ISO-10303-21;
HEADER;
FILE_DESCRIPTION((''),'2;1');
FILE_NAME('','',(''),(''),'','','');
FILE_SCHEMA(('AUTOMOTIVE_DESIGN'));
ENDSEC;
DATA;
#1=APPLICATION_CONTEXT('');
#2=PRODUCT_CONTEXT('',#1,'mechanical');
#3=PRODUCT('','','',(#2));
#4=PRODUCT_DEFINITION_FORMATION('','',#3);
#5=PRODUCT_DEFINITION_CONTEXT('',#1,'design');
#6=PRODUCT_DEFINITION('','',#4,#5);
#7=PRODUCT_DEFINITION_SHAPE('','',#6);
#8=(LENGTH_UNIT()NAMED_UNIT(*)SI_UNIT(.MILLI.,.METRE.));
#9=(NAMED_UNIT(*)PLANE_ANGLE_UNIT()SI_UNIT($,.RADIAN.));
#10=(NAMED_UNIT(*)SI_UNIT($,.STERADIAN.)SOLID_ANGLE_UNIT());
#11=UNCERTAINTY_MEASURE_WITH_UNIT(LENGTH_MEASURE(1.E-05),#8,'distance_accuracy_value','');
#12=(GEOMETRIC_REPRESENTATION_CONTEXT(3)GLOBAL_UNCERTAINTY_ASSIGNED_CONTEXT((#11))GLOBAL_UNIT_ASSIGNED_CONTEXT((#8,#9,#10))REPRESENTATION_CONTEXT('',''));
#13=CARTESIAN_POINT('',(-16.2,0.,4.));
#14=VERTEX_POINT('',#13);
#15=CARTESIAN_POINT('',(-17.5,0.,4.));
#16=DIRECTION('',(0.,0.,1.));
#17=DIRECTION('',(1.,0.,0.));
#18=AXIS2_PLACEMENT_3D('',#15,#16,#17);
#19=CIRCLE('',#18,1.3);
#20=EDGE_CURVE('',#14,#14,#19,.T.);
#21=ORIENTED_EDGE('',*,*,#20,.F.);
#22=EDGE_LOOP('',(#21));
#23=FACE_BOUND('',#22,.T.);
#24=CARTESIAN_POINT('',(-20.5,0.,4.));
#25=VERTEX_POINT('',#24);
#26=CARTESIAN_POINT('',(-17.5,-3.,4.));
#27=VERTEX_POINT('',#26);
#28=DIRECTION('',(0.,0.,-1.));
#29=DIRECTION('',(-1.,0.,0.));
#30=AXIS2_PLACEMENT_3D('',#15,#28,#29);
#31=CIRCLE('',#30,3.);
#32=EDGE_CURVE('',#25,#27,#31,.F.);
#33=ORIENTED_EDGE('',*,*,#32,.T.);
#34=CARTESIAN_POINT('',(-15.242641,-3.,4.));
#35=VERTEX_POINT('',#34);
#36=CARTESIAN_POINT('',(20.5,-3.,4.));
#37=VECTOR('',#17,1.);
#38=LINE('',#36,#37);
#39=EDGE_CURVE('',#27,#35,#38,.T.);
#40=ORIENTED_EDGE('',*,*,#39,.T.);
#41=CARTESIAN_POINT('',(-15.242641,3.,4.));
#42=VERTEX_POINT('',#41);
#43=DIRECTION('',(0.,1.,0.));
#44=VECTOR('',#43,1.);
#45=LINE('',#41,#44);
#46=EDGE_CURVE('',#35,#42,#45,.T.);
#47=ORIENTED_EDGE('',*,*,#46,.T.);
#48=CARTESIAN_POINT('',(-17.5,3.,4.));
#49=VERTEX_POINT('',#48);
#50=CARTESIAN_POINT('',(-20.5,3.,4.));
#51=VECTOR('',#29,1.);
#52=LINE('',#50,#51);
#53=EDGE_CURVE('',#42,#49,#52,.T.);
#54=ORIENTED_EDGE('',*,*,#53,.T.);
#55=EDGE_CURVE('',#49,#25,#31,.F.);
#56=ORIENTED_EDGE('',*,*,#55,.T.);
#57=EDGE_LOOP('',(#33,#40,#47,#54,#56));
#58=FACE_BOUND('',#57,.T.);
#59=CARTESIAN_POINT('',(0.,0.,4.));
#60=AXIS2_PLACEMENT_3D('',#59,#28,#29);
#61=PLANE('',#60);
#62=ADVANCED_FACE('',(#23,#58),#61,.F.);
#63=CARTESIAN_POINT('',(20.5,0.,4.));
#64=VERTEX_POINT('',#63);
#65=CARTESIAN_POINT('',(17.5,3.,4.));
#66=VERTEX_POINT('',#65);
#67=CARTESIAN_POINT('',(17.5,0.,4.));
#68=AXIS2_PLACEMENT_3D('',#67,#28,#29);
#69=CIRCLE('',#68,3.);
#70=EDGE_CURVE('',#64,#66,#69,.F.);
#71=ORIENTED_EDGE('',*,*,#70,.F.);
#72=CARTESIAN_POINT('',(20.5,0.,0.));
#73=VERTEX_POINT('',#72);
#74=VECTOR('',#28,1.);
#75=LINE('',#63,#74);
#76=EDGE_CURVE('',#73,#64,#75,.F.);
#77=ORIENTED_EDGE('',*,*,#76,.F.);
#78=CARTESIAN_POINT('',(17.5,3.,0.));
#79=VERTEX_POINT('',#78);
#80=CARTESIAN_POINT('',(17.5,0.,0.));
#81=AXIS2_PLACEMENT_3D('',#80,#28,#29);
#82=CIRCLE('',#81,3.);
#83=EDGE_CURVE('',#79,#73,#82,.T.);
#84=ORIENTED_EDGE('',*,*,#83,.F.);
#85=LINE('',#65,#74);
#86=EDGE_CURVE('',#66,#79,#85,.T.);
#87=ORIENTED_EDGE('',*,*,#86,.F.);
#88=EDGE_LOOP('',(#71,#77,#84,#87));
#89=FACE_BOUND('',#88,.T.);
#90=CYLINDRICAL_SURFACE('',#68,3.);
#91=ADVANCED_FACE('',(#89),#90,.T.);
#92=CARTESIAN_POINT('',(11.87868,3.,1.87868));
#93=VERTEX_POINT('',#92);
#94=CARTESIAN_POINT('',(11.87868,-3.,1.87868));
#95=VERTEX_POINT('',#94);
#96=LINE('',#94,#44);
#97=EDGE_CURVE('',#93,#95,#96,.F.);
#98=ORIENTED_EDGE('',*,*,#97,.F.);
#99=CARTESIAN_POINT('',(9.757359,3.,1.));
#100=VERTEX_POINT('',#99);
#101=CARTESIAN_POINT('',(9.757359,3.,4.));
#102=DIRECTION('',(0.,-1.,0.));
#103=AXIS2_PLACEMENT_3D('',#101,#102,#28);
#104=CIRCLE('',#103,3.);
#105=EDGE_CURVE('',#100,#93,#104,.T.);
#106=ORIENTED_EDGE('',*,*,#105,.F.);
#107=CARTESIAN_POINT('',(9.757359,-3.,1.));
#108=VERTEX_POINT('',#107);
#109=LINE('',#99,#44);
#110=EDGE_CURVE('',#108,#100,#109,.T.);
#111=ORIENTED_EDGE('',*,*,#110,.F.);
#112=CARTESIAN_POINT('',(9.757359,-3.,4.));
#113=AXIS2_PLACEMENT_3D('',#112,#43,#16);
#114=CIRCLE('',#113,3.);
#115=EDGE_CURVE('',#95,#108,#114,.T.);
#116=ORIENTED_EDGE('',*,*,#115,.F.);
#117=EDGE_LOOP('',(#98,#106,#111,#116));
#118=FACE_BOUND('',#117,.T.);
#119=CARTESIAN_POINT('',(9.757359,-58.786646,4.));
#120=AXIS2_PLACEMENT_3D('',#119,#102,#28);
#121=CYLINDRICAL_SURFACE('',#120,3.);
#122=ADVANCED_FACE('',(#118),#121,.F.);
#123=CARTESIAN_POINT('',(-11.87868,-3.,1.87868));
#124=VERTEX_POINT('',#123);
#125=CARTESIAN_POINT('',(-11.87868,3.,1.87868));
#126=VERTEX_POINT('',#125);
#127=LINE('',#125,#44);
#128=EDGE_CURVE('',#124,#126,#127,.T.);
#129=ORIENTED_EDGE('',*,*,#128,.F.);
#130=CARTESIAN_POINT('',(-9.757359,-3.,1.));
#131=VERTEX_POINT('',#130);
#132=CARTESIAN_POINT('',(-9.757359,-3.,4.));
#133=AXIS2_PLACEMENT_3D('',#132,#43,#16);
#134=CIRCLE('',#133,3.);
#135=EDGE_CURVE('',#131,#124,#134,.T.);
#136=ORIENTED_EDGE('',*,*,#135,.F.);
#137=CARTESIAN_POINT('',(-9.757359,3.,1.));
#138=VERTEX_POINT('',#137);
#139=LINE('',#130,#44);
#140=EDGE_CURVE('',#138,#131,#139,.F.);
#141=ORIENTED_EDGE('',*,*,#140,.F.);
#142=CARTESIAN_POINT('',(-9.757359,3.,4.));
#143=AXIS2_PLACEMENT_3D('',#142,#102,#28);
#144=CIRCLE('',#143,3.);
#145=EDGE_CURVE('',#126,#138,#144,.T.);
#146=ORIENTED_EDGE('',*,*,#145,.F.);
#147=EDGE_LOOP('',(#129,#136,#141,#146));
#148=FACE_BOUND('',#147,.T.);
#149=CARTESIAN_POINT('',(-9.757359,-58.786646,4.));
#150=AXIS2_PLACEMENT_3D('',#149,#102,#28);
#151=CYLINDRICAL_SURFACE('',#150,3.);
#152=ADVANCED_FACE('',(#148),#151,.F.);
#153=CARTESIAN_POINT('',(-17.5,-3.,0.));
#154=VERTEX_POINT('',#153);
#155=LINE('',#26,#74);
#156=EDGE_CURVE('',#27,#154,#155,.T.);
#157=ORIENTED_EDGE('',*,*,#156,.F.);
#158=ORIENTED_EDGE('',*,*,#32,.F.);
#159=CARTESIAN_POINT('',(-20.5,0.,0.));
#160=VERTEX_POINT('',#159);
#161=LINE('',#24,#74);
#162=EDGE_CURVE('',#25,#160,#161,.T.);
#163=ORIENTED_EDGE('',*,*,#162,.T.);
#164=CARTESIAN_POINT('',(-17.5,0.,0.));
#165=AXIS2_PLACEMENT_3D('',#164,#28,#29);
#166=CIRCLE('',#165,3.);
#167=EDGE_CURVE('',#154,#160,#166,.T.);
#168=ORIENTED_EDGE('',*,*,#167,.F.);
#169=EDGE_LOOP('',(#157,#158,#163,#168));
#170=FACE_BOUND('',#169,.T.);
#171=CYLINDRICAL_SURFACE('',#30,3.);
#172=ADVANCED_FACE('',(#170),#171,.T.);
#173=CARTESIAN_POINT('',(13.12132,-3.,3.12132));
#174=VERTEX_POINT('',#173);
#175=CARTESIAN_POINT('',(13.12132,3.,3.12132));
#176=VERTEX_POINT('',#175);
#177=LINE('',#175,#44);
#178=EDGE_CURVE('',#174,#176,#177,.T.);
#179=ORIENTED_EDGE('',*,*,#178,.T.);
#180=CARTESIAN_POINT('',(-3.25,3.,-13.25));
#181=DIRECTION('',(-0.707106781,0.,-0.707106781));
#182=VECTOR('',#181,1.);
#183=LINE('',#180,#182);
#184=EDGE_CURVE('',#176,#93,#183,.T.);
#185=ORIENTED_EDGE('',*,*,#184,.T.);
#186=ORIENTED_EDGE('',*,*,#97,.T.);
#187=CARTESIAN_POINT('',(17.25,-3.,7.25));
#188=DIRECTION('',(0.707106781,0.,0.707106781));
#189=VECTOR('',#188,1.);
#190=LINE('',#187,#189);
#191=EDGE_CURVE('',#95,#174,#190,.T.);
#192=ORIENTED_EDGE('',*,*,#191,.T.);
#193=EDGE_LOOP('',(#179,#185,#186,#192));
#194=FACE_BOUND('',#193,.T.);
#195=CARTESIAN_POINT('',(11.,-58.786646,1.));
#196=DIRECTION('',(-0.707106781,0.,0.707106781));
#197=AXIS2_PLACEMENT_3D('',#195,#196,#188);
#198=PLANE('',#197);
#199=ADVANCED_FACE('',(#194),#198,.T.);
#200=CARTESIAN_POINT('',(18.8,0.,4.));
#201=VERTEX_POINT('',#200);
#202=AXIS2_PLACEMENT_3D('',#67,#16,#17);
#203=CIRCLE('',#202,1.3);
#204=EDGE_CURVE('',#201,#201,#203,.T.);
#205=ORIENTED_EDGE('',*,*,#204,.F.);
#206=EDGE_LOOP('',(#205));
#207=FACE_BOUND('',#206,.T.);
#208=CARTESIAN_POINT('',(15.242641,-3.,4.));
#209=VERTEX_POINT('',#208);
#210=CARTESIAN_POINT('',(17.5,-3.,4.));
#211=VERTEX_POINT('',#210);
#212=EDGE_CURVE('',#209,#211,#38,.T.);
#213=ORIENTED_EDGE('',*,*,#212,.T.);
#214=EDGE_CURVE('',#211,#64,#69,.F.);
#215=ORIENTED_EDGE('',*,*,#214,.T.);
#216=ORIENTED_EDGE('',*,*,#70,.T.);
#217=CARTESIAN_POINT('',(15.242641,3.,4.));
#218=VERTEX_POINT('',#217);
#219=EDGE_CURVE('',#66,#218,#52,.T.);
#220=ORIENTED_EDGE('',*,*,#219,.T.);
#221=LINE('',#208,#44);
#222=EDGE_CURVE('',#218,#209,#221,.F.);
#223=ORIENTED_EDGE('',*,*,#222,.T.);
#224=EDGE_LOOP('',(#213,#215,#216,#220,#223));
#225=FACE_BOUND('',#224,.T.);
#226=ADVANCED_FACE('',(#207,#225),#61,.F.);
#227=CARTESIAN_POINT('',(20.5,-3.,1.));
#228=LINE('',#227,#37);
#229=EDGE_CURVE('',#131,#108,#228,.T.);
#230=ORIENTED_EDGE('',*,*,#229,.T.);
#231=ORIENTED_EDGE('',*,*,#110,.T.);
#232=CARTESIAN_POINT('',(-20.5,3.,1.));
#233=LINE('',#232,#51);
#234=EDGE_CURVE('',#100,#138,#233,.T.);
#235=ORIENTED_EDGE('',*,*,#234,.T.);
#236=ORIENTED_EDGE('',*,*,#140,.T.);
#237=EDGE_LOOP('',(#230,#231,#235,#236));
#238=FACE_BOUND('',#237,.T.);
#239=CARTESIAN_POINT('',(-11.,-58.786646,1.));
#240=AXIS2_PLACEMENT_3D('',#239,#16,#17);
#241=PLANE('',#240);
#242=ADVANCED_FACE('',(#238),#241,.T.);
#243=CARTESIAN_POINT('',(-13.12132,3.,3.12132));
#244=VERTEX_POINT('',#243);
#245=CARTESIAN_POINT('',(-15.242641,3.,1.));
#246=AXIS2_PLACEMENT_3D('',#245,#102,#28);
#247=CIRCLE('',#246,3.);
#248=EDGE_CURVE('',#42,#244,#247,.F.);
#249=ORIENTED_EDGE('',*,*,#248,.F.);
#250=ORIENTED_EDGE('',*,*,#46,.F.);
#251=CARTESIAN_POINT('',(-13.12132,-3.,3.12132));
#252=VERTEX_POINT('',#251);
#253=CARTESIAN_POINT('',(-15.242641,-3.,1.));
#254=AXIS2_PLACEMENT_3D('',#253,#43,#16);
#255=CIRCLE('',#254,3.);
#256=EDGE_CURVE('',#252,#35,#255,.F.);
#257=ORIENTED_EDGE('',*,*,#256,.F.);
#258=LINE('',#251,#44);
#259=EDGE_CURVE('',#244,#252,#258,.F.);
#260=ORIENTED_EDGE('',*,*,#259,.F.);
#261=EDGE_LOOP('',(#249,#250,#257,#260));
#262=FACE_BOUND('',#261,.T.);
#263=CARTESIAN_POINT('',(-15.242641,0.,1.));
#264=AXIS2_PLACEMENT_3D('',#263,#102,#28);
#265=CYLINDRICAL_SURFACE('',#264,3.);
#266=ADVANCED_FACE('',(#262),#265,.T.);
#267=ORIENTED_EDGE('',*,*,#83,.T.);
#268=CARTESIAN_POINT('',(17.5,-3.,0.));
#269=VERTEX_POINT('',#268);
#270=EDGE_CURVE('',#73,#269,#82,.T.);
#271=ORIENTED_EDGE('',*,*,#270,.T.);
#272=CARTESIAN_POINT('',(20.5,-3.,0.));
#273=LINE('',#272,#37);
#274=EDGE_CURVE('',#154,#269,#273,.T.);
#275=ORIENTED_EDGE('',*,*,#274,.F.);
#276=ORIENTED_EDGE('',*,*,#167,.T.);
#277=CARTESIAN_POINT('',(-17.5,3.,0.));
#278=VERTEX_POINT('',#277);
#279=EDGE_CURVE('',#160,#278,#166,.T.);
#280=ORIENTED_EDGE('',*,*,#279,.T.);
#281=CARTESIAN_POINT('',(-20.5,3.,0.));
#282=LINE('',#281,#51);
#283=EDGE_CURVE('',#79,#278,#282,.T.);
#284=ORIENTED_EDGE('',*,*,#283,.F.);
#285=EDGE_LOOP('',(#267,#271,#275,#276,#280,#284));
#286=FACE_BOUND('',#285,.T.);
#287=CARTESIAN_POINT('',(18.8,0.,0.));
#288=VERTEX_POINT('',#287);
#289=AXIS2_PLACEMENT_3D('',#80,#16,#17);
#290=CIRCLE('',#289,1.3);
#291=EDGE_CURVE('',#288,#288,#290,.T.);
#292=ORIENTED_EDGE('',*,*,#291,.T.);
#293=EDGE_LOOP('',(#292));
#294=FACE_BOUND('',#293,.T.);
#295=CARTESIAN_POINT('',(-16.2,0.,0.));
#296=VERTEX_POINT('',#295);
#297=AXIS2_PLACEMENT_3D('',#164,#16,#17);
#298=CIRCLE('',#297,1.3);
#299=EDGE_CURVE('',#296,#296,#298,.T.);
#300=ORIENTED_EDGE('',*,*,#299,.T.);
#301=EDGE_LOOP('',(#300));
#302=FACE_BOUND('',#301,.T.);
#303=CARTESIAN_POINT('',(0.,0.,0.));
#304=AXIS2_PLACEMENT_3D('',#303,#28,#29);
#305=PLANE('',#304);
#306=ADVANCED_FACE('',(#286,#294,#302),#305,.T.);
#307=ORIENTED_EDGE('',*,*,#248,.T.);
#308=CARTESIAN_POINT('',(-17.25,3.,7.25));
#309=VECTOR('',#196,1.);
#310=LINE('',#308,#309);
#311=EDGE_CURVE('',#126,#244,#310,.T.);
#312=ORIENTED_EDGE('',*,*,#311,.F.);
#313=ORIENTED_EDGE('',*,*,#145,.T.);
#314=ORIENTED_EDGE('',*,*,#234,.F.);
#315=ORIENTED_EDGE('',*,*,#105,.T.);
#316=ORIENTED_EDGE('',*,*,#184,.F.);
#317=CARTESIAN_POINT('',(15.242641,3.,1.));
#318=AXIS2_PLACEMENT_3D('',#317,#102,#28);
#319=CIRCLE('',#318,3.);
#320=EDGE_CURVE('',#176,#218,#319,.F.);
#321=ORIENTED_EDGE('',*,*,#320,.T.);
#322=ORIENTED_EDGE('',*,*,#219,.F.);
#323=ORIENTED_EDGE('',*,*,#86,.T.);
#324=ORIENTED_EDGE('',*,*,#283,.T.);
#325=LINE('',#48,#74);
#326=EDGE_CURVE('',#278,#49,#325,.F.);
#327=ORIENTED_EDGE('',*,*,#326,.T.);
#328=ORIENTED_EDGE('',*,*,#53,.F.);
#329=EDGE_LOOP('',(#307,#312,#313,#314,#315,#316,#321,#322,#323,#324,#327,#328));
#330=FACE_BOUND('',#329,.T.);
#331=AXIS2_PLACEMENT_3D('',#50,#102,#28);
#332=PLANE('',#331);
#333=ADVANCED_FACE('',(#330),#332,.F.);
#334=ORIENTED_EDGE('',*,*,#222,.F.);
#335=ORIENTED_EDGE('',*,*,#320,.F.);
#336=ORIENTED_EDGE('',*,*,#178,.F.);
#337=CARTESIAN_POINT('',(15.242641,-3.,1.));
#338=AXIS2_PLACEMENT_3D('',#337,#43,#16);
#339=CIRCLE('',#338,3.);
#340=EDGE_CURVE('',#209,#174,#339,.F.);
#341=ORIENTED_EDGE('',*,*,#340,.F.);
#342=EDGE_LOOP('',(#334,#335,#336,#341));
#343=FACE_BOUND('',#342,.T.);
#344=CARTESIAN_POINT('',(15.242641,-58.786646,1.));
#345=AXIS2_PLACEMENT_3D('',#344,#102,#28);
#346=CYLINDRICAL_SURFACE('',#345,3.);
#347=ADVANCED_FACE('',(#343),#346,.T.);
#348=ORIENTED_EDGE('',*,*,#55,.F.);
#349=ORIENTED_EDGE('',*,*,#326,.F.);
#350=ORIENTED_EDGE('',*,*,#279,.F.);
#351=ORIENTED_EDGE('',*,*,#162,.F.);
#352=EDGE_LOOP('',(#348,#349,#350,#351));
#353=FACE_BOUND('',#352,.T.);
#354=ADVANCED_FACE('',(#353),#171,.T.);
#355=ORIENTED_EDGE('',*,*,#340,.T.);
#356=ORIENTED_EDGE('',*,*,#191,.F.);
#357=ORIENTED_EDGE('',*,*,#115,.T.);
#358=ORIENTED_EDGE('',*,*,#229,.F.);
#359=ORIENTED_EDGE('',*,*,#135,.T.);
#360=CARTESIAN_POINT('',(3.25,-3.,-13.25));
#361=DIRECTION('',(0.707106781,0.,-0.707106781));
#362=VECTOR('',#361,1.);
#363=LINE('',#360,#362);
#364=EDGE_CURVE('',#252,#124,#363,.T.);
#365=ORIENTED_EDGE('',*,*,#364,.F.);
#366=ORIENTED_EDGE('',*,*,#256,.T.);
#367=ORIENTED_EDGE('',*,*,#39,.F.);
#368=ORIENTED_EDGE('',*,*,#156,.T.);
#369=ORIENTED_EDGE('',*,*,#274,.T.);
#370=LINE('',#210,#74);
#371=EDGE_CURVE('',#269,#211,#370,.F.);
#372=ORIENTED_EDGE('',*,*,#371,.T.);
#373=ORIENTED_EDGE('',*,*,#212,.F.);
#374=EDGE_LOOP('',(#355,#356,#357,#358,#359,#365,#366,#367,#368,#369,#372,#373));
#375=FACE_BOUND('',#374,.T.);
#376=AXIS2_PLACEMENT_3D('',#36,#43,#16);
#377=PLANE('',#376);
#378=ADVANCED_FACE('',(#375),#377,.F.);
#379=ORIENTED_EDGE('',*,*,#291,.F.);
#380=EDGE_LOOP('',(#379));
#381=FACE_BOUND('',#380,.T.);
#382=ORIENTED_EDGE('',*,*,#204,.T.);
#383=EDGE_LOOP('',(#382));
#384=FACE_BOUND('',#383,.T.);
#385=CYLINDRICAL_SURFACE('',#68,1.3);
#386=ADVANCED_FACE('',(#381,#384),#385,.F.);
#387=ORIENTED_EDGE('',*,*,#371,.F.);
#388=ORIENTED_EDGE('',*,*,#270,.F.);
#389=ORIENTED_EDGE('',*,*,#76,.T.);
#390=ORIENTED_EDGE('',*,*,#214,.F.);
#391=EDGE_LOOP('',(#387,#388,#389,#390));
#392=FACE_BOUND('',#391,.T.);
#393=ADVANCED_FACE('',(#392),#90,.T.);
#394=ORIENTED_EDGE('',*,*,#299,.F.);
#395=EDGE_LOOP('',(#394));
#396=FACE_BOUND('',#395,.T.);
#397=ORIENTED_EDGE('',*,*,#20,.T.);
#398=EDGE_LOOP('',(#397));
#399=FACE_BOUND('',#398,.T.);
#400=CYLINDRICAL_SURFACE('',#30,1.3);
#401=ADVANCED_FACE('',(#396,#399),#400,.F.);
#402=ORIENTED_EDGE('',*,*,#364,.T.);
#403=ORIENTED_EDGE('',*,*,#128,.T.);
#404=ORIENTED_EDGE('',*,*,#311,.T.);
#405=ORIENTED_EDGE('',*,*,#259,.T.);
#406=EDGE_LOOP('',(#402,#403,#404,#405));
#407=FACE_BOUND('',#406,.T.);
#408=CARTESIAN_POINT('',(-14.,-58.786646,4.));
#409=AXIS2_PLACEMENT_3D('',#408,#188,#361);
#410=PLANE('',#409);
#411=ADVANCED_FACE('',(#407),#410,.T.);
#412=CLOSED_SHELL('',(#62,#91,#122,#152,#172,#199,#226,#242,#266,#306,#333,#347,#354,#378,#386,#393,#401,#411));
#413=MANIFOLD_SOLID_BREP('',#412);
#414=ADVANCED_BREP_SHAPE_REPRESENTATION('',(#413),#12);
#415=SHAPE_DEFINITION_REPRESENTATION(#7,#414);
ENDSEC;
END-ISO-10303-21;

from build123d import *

# Parameters (mm, degrees)
SKETCH1_W               = 41
SKETCH1_H               = 6
SKETCH1_R               = 1.3
BOSS_EXTRUDE1_DEPTH     = 4
FILLET1_R               = 3
CUT_EXTRUDE1_DEPTH      = 22.731313812
CUT_EXTRUDE1_DEPTH_BACK = 22.731313812
FILLET2_R               = 3


with BuildPart() as part:
    # Sketch1 → Boss-Extrude1 (new body)
    with BuildSketch(Plane.XY):
        Rectangle(SKETCH1_W, SKETCH1_H)
        with Locations((17.5, 0)):
            Circle(SKETCH1_R, mode=Mode.SUBTRACT)
        with Locations((-17.5, 0)):
            Circle(SKETCH1_R, mode=Mode.SUBTRACT)
    extrude(amount=BOSS_EXTRUDE1_DEPTH)

    # Fillet1
    fillet1_edges = [part.edges().sort_by_distance(p)[0] for p in [
        (-20.5, -3, 2),
        (-20.5, 3, 2),
        (20.5, -3, 2),
        (20.5, 3, 2),
    ]]
    fillet(fillet1_edges, radius=FILLET1_R - 0.0001)  # a hair under: the kernel refuses the full size

    # Sketch2 → Cut-Extrude1 (cut, two sides: drawn at the far end of the back side and taken through both)
    with BuildSketch(Plane.XZ.offset(3).offset(-CUT_EXTRUDE1_DEPTH_BACK)):
        Polygon((-70.188274573, 60.188274573), (-14, 4), (-11, 1), (11, 1), (14, 4), (70.188274573, 60.188274573), (70.188274573, 219.112714467), (-70.188274573, 219.112714467), align=None)
    extrude(amount=CUT_EXTRUDE1_DEPTH + CUT_EXTRUDE1_DEPTH_BACK, mode=Mode.SUBTRACT)

    # Fillet2
    fillet2_edges = [part.edges().sort_by_distance(p)[0] for p in [
        (-11, 0, 1),
        (11, 0, 1),
        (14, 0, 4),
        (-14, 0, 4),
    ]]
    fillet(fillet2_edges, radius=FILLET2_R)


solid = part.part
